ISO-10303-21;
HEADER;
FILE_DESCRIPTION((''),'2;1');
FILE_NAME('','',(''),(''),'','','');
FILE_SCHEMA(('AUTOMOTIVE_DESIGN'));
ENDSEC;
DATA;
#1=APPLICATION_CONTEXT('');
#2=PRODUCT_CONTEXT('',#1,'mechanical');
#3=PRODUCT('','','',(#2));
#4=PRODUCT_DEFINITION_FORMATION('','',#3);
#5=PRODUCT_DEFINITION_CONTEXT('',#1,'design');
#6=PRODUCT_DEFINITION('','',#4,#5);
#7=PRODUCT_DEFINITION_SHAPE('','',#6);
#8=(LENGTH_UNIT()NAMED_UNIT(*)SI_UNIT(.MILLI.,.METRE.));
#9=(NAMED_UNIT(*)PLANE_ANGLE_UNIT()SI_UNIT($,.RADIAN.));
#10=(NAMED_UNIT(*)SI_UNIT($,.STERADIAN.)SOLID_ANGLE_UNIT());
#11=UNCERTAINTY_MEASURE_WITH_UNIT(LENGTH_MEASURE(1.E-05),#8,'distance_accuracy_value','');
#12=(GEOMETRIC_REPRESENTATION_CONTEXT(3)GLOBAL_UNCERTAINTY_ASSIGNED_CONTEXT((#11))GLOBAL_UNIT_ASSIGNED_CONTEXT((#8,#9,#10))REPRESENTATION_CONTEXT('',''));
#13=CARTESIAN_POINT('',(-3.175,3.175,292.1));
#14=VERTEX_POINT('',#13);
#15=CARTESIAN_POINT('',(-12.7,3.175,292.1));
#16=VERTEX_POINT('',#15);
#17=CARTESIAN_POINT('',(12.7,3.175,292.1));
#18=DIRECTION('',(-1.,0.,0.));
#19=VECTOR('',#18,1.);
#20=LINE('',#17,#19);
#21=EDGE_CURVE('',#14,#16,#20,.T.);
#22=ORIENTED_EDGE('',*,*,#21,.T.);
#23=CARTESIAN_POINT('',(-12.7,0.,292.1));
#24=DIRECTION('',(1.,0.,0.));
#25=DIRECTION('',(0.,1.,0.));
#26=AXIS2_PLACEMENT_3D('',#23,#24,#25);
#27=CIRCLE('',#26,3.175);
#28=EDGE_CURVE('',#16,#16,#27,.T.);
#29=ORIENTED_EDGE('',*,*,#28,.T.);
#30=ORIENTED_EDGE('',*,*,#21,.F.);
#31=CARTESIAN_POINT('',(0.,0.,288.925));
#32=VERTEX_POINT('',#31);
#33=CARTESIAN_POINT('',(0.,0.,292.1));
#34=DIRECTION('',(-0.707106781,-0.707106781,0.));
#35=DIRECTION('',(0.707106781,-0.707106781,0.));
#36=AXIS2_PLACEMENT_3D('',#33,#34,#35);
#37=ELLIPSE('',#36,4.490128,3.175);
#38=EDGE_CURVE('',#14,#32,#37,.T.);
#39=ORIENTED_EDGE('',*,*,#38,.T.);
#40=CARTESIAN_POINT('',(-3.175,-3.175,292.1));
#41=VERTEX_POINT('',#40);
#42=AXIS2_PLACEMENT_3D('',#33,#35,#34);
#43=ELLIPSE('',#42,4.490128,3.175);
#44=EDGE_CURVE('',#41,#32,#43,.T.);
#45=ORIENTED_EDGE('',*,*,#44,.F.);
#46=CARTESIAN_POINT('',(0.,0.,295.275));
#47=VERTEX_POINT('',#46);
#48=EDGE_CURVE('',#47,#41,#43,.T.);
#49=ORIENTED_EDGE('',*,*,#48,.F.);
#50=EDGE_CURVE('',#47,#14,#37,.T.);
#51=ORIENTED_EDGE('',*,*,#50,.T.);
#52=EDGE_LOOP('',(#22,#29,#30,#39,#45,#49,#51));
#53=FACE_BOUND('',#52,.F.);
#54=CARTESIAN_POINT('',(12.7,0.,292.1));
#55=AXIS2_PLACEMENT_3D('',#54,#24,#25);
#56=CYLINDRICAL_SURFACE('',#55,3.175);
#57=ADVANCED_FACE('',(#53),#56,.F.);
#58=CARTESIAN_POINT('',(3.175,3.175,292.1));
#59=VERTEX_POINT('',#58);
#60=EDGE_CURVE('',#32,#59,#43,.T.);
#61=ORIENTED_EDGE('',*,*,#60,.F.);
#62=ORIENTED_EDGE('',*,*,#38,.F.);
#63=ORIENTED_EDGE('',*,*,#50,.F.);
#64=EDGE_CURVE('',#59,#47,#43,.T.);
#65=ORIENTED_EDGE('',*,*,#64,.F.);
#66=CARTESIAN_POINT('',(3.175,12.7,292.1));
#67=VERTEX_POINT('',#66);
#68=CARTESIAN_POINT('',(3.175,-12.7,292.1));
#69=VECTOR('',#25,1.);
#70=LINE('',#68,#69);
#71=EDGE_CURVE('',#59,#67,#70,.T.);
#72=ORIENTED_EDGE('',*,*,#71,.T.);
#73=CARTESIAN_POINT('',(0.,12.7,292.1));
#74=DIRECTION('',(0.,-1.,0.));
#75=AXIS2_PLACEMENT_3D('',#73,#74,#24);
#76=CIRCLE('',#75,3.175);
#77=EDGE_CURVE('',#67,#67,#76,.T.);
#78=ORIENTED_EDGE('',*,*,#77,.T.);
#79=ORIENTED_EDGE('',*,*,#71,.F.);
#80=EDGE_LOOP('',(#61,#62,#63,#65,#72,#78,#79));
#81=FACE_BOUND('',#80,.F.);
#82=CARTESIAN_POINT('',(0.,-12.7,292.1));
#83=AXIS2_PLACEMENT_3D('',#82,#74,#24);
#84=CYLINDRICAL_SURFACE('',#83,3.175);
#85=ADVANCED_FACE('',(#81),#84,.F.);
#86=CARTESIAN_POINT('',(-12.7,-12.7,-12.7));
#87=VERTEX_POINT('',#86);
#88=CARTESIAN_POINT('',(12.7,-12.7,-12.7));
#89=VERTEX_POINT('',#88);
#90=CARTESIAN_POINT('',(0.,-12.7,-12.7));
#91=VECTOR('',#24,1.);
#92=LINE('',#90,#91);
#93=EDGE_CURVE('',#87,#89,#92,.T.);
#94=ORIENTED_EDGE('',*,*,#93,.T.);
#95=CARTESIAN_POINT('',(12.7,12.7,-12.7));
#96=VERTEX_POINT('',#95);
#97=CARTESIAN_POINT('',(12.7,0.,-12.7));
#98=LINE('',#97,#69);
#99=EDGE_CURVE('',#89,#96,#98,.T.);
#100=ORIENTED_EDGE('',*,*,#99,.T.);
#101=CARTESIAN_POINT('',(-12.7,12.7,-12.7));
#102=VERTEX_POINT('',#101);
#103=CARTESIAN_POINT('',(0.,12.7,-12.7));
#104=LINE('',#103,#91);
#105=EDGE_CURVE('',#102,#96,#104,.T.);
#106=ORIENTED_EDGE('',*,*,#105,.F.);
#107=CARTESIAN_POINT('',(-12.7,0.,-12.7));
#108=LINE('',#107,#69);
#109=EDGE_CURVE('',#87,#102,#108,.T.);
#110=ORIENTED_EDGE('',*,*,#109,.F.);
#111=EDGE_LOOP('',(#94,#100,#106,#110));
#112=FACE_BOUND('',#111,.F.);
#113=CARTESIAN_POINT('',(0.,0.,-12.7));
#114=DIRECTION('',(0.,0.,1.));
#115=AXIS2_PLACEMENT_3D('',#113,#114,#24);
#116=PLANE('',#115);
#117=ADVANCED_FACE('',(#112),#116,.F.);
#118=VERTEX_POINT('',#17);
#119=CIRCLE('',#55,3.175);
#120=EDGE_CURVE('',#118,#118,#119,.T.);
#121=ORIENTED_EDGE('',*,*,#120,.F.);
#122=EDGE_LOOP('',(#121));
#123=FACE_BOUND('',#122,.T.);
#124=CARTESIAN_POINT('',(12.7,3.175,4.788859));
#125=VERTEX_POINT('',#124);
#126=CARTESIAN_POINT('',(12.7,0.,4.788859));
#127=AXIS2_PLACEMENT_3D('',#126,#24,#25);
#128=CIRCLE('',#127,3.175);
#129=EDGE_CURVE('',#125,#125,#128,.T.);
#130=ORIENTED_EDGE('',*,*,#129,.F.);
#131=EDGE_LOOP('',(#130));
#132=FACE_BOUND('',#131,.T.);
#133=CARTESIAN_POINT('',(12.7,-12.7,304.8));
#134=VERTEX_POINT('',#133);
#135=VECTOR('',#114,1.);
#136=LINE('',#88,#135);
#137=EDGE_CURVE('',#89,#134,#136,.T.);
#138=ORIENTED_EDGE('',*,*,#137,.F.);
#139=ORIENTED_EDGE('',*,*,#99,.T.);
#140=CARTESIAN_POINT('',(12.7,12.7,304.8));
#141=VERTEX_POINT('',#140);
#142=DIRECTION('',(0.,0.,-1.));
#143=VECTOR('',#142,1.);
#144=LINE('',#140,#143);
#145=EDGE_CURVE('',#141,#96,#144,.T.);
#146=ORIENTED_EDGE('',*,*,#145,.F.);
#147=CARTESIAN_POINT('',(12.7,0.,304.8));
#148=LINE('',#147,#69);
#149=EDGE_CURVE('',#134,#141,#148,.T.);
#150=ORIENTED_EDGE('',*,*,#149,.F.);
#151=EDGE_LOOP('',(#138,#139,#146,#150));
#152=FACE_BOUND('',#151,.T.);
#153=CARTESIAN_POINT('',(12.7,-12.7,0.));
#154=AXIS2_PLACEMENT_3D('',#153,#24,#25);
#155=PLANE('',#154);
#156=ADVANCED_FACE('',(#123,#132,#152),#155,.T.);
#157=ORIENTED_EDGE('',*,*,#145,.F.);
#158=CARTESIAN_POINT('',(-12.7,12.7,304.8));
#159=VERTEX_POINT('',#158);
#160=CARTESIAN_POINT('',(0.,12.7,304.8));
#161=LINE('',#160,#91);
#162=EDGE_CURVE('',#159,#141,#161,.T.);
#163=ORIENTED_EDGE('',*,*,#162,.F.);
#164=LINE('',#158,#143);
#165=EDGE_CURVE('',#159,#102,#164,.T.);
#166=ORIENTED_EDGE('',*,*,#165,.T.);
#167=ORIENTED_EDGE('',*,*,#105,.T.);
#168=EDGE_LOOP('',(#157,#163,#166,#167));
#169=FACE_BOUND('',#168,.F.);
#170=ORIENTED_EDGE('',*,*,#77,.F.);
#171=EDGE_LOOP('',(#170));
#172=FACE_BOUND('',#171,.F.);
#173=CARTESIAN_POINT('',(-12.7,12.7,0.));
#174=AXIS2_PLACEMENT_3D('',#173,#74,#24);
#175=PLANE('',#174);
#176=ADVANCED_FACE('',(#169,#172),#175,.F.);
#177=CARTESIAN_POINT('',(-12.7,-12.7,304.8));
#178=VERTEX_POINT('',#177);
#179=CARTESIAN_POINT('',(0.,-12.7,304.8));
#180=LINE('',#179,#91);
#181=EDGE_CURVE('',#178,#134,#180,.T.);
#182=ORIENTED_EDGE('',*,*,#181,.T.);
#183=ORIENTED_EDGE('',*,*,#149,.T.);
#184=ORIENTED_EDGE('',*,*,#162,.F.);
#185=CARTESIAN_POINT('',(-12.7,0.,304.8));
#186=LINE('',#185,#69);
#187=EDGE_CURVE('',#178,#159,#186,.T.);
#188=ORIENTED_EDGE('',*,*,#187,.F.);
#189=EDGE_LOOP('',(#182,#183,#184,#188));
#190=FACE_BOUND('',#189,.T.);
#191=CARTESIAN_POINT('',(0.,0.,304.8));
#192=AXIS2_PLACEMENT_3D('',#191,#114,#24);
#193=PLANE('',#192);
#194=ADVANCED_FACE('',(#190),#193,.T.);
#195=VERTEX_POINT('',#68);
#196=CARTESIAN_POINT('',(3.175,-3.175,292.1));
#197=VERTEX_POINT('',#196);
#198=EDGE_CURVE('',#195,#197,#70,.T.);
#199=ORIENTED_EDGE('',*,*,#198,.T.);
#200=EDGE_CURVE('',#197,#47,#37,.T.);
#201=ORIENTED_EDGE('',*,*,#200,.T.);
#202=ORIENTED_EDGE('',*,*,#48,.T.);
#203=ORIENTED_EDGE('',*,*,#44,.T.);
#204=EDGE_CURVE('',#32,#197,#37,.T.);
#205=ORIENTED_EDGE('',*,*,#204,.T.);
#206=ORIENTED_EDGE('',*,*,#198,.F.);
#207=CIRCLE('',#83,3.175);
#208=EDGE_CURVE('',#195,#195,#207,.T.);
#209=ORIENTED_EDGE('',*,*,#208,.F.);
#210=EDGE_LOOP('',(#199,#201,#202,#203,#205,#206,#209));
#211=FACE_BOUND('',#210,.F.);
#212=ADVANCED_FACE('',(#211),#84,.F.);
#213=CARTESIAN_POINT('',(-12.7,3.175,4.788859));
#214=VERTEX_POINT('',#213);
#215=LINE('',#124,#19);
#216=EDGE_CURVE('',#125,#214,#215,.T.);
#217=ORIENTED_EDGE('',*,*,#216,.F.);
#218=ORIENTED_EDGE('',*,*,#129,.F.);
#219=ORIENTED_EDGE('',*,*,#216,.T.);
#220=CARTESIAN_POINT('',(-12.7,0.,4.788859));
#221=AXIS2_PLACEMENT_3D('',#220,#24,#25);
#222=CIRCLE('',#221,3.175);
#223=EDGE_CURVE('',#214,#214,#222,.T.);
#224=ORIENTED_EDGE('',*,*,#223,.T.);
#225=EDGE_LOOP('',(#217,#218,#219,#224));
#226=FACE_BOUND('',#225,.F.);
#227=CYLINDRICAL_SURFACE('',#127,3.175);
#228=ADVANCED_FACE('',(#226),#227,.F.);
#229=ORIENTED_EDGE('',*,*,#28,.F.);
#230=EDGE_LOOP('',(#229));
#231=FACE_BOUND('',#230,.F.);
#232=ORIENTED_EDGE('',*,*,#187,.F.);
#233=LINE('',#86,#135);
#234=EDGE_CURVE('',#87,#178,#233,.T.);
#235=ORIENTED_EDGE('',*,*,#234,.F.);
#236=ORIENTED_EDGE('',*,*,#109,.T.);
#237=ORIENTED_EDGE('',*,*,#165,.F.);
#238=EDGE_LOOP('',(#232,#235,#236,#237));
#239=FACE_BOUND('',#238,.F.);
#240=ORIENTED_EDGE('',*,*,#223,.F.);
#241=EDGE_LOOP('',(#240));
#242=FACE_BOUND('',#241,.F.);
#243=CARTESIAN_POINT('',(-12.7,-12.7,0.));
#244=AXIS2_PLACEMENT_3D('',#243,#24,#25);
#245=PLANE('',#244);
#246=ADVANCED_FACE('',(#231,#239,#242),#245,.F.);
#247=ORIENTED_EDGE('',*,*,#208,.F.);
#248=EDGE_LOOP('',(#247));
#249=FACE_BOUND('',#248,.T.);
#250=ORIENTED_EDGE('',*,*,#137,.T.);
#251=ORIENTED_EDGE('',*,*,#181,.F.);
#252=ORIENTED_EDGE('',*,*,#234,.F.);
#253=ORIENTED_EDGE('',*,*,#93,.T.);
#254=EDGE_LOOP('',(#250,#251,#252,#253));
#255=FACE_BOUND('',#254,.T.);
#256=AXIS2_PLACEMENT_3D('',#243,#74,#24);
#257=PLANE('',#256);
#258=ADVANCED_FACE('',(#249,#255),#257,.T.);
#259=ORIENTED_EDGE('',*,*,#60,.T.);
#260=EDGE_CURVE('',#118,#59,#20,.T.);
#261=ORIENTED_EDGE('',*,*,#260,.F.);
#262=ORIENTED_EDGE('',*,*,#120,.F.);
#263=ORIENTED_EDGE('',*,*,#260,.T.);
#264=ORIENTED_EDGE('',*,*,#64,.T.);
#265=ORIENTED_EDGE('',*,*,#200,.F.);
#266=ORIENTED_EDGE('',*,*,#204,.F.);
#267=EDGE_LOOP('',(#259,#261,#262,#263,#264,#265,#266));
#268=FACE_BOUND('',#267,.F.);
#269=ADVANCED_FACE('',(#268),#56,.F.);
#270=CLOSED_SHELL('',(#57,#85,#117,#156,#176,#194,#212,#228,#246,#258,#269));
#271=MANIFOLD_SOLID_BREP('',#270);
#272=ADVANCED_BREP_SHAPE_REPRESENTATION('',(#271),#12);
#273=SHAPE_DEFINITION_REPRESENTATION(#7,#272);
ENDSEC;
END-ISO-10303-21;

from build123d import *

# Parameters (mm, degrees)
F0_W     = 25.4
F0_H     = 25.4
F1_DEPTH = 304.8
F2_R     = 3.175
F3_DEPTH = 50.8
F4_R     = 3.175
F5_DEPTH = 25.4
F6_R     = 3.175
F7_DEPTH = 25.4
F8_DEPTH = 12.7


with BuildPart() as f1:
    # F0 (on Top) → F1 (new body)
    with BuildSketch(Plane.XY):
        Rectangle(F0_W, F0_H)
    extrude(amount=F1_DEPTH)

    # F2 (on face) → F3 (cut)
    with BuildSketch(Plane.XZ.offset(12.7)):
        with Locations((0, 292.1)):
            Circle(F2_R)
    extrude(amount=-F3_DEPTH, mode=Mode.SUBTRACT)

    # F4 (on face) → F5 (cut)
    with BuildSketch(Plane.YZ.offset(12.7)):
        with Locations((0, 292.1)):
            Circle(F4_R)
    extrude(amount=-F5_DEPTH, mode=Mode.SUBTRACT)

    # F6 (on face) → F7 (cut)
    with BuildSketch(Plane.YZ.offset(12.7)):
        with Locations((0, 4.7888585575)):
            Circle(F6_R)
    extrude(amount=-F7_DEPTH, mode=Mode.SUBTRACT)

    # F8 (add): a face of the model
    f8_faces = [f1.faces().sort_by_distance(p)[0] for p in [
        (0, 0, 0),
    ]]
    extrude(f8_faces, amount=F8_DEPTH)


solid = f1.part
